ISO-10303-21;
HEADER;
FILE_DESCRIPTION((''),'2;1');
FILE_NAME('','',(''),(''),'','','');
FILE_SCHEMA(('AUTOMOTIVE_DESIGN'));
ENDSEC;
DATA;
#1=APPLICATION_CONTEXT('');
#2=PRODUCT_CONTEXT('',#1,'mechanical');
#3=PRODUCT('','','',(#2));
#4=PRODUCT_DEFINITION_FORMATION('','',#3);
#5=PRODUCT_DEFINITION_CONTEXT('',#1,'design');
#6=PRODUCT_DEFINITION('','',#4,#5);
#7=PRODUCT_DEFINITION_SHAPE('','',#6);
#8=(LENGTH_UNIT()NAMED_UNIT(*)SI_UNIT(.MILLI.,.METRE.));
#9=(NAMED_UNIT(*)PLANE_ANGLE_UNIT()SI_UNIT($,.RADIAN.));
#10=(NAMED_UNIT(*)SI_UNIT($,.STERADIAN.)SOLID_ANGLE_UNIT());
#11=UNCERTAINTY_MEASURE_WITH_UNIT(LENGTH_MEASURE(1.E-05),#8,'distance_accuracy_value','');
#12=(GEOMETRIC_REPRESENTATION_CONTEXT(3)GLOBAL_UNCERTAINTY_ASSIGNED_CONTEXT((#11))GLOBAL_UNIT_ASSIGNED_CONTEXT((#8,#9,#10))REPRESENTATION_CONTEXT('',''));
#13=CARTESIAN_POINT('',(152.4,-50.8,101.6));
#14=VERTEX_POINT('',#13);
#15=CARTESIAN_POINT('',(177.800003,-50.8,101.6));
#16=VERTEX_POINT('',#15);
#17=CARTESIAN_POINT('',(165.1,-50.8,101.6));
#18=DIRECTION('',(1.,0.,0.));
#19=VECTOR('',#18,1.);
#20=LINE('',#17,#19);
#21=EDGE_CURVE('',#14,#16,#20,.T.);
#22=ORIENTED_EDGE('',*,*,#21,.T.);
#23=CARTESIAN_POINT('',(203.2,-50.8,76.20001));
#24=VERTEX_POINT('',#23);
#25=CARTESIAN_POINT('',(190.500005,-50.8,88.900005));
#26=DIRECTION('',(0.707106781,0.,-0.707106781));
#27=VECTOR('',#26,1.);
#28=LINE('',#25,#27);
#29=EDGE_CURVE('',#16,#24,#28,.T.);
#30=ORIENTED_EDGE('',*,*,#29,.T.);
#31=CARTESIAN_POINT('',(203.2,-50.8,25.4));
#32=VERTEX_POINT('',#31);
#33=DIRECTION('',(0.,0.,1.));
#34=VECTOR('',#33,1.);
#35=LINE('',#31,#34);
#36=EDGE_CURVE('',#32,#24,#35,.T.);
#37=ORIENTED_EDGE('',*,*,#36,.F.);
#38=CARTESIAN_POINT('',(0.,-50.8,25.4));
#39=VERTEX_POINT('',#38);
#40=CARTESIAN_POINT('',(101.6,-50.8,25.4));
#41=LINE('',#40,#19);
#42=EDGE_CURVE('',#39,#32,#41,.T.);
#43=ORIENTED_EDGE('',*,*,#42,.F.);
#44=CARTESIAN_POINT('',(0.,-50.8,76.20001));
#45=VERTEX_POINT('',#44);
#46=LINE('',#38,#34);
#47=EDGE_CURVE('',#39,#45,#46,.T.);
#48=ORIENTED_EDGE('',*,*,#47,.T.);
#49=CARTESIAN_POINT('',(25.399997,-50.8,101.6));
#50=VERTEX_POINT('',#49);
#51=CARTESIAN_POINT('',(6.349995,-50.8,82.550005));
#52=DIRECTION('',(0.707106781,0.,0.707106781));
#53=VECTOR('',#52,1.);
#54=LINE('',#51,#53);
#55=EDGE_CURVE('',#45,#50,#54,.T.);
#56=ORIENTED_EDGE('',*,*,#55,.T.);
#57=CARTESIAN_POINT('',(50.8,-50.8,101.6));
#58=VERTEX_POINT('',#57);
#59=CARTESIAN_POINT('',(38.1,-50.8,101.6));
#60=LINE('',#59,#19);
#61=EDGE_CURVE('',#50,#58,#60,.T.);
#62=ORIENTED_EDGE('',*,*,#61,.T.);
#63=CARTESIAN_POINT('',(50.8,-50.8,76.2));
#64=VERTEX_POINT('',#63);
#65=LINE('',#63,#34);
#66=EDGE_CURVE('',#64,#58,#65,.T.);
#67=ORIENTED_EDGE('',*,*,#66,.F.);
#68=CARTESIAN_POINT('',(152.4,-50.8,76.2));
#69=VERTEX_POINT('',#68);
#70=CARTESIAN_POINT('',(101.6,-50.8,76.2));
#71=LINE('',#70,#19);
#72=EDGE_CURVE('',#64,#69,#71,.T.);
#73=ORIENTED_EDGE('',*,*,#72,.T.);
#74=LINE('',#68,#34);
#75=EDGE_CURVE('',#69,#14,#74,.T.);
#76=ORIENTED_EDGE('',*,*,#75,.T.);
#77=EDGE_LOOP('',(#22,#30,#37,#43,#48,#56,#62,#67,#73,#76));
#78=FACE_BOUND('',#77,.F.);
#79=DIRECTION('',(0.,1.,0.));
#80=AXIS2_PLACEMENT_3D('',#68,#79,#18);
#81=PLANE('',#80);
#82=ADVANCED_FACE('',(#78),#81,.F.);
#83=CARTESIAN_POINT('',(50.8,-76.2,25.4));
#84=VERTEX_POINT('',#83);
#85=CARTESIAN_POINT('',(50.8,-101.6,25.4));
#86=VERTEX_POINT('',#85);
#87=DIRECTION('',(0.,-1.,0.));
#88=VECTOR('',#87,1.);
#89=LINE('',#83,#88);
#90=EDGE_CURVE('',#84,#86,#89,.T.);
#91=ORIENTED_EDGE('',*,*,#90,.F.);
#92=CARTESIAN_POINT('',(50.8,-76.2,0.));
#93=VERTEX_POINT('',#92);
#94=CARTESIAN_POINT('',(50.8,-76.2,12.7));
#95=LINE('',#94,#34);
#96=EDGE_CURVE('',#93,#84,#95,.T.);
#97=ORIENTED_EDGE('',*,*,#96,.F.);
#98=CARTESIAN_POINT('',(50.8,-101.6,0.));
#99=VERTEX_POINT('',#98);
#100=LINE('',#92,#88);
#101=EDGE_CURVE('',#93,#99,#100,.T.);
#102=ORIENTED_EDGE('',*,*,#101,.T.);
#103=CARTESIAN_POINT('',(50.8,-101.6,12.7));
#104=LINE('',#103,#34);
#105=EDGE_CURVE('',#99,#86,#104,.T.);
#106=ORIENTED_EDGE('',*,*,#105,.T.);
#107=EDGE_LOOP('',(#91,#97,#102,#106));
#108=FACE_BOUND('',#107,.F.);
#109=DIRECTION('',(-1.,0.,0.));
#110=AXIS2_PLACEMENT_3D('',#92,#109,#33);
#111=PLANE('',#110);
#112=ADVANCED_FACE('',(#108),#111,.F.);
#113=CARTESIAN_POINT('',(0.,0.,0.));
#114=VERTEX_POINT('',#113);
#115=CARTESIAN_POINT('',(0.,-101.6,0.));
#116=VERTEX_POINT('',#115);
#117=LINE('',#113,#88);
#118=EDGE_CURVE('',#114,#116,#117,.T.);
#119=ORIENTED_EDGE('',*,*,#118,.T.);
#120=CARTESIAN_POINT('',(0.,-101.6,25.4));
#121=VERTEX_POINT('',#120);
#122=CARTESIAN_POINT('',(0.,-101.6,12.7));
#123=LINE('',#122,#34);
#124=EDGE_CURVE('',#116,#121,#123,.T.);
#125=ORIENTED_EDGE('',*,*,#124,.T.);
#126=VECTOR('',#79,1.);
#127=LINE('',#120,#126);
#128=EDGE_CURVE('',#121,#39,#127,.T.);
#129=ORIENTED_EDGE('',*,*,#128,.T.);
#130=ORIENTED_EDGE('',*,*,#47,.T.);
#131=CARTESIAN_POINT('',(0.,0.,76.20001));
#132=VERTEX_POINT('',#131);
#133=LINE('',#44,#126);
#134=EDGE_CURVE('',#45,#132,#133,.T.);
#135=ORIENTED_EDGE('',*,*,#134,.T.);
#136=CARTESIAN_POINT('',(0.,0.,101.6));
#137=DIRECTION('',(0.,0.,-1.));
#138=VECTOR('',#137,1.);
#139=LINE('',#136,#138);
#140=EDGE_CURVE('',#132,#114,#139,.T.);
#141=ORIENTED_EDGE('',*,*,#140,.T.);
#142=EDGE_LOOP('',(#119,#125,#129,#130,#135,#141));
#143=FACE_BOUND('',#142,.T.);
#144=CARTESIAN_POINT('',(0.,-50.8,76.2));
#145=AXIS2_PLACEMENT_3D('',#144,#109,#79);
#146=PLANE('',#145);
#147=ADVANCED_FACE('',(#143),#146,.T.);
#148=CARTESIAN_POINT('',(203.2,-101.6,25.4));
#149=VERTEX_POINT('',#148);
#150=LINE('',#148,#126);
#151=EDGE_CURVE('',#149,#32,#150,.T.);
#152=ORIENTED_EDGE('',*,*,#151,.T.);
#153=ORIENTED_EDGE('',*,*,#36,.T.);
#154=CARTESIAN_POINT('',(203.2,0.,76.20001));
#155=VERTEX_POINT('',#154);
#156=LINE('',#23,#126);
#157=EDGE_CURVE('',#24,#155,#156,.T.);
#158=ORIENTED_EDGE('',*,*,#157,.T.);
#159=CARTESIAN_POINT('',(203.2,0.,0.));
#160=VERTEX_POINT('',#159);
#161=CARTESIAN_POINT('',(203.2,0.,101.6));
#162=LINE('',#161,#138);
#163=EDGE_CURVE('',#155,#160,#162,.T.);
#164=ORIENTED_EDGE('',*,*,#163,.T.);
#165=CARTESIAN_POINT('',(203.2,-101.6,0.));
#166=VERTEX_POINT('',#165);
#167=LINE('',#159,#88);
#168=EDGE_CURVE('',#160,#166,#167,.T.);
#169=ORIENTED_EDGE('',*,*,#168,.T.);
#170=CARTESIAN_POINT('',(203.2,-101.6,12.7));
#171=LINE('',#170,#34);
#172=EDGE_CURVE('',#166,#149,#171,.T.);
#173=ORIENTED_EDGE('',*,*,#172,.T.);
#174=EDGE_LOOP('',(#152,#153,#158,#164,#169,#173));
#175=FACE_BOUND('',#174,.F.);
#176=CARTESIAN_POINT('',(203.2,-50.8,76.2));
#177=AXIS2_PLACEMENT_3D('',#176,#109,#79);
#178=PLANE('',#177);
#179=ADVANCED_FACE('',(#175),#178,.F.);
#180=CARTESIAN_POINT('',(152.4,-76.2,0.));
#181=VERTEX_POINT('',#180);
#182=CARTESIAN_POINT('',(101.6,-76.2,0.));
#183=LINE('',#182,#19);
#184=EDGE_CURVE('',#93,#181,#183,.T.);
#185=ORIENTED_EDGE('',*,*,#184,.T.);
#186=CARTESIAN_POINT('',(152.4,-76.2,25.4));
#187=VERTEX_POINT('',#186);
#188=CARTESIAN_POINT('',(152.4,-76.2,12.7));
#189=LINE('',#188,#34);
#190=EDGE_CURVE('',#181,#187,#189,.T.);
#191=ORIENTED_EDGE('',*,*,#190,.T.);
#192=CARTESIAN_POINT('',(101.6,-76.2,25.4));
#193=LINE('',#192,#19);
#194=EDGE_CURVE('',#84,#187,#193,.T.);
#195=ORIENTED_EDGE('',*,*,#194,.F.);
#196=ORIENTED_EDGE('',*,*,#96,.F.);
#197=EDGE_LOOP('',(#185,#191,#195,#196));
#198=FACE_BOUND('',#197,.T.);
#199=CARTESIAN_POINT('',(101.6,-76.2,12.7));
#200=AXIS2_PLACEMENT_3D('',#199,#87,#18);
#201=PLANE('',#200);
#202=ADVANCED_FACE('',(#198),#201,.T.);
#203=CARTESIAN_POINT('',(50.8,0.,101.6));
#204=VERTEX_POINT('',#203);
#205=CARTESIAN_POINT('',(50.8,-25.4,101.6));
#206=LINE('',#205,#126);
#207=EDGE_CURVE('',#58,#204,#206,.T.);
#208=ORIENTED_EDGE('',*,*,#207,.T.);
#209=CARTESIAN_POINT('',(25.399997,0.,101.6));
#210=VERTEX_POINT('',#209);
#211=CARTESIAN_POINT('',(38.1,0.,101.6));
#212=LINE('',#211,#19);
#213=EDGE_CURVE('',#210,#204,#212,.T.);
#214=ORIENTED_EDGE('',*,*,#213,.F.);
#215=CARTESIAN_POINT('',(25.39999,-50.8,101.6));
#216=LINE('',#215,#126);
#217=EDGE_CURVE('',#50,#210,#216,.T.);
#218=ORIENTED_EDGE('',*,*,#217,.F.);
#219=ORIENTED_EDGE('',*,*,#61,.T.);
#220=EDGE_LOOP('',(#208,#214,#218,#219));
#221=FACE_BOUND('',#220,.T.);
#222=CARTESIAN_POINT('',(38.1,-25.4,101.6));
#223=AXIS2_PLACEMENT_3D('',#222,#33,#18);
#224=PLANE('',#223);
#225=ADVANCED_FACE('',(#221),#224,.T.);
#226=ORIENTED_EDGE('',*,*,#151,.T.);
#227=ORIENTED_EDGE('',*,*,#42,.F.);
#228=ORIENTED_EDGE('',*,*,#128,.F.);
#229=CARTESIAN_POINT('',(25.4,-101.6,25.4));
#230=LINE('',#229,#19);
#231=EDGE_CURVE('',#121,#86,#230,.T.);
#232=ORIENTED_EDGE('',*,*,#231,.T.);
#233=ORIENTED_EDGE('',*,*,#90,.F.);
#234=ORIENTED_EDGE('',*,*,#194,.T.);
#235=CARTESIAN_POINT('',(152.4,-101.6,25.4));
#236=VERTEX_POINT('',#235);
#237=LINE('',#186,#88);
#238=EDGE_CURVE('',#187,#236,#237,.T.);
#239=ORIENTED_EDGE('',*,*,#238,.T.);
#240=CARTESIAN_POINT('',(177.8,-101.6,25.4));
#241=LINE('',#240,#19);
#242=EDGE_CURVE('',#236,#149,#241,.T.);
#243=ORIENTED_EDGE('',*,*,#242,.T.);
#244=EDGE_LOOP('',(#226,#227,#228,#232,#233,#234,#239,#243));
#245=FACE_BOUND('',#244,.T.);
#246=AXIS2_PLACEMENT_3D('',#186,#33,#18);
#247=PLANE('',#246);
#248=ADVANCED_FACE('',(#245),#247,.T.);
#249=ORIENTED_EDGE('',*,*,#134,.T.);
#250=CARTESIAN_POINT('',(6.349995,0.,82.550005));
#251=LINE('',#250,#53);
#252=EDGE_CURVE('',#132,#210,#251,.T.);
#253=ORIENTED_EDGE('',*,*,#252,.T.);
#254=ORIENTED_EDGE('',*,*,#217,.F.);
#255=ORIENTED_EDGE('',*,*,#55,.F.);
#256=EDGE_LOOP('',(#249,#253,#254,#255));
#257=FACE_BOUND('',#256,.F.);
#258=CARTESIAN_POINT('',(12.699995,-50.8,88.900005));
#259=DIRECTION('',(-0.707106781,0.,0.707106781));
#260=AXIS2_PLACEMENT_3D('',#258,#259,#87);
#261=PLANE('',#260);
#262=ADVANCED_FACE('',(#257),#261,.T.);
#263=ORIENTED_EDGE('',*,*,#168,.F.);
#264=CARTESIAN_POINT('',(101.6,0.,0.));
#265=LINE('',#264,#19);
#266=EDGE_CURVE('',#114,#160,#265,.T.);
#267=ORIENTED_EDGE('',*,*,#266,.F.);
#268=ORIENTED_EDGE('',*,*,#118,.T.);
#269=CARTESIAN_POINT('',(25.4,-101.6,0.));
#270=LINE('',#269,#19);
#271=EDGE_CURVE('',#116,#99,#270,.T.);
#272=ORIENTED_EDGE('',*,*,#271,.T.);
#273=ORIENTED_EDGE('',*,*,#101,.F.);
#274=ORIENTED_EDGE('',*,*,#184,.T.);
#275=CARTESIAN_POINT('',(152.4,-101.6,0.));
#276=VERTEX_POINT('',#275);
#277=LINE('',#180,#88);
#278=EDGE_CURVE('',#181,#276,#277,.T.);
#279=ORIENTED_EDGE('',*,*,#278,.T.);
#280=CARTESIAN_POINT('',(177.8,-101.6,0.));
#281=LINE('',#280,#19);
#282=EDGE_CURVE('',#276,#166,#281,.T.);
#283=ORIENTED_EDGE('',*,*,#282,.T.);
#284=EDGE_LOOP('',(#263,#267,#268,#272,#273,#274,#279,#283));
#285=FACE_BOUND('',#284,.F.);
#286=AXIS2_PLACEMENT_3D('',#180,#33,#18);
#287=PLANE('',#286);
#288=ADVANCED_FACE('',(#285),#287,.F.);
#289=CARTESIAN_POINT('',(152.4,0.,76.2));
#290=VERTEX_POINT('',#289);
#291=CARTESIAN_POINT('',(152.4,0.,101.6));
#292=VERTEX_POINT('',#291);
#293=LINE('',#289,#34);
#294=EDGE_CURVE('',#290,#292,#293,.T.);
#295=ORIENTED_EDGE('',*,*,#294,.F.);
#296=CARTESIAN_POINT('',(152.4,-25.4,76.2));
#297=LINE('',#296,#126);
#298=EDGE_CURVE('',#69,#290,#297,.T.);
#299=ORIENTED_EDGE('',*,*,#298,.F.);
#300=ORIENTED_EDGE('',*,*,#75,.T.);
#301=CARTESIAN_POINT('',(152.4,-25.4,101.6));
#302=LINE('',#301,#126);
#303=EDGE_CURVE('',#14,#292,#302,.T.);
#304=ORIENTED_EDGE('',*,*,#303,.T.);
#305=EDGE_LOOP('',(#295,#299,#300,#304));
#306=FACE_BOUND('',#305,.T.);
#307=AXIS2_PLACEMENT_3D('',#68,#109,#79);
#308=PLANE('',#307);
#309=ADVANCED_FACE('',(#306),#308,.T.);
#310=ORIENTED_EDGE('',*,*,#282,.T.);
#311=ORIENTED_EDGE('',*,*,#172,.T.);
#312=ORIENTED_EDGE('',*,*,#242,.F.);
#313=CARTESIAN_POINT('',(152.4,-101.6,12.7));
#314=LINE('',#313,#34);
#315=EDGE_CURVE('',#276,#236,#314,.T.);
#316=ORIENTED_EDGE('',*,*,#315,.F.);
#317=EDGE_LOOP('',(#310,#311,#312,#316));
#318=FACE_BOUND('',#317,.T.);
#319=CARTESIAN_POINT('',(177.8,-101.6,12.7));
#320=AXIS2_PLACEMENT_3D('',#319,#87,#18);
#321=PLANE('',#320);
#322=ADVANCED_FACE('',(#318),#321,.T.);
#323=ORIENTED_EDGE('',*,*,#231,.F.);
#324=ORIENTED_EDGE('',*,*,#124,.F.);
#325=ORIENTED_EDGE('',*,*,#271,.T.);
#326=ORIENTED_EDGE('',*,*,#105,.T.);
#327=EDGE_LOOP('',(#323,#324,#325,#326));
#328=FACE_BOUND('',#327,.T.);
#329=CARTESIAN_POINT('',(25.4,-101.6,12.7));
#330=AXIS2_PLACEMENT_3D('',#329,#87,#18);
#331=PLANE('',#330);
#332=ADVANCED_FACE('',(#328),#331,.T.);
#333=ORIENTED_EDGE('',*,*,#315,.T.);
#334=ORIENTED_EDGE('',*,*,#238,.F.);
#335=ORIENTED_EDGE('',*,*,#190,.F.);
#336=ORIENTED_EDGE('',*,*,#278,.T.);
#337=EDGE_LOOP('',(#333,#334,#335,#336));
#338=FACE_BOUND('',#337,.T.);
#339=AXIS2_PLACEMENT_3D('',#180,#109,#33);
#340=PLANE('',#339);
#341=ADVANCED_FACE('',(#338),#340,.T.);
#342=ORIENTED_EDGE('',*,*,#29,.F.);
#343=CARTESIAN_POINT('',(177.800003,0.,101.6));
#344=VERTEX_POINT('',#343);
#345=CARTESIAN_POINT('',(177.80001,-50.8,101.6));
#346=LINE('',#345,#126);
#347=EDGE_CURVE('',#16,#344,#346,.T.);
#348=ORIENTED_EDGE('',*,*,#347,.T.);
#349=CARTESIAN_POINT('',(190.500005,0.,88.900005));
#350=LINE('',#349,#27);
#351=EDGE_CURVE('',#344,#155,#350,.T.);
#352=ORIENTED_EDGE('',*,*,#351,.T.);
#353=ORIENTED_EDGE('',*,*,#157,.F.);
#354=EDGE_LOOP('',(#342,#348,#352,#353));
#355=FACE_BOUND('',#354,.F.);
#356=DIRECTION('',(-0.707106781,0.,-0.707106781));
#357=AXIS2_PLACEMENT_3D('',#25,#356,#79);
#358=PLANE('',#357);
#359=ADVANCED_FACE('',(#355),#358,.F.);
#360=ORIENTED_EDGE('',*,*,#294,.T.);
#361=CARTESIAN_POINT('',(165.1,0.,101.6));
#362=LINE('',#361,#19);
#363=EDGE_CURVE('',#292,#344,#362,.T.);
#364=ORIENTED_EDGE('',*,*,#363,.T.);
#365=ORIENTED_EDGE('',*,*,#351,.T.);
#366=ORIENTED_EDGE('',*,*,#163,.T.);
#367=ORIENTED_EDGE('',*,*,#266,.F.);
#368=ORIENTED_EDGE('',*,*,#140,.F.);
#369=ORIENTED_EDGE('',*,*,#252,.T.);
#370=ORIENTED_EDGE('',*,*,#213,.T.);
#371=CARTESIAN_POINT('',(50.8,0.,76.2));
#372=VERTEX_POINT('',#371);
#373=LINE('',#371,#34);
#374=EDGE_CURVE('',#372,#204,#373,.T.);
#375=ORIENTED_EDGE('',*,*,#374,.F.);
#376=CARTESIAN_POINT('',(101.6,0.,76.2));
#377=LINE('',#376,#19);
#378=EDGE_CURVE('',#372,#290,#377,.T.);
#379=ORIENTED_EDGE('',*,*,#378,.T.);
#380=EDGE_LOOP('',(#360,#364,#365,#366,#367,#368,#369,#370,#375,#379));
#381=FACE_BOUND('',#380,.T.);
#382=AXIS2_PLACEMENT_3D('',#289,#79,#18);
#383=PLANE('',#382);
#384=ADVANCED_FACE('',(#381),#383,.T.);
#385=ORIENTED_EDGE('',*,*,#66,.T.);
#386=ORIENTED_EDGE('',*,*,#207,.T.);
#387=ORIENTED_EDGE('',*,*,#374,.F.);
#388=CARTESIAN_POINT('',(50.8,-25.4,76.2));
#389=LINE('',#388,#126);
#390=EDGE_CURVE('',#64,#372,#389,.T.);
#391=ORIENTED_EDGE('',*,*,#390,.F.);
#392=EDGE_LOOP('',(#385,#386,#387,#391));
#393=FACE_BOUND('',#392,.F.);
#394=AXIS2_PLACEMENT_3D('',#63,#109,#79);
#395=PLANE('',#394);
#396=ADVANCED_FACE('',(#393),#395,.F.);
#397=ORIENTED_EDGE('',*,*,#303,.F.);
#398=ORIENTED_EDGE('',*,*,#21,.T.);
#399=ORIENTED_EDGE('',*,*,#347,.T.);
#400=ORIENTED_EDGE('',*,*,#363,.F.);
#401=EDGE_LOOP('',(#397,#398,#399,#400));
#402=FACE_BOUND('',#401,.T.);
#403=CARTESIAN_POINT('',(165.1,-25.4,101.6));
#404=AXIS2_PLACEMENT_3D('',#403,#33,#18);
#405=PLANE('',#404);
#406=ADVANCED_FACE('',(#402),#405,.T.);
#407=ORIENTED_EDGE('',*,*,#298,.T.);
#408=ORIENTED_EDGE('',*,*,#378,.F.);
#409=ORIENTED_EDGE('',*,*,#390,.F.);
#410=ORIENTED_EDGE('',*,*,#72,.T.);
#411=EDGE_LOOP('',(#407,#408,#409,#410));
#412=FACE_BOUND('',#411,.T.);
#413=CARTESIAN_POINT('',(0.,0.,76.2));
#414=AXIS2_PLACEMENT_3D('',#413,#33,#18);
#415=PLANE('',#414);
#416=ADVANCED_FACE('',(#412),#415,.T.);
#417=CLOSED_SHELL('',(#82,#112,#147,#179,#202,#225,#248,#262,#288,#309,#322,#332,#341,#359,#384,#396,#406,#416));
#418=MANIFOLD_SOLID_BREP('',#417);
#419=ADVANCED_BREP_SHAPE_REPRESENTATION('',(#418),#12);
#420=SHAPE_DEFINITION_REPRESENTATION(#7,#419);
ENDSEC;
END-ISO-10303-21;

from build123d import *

# Parameters (mm, degrees)
F0_W      = 203.2
F0_H      = 76.2
F1_DEPTH  = 50.8
F2_W      = 203.2
F2_H      = 25.4
F3_DEPTH  = 25.4
F4_W      = 50.8
F4_H      = 25.4
F5_DEPTH  = 25.4
F6_W      = 50.8
F6_H      = 25.4
F7_DEPTH  = 25.4
F8_W      = 25.4
F8_H      = 50.8
F9_DEPTH  = 25.4
F10_SIZE  = 25.39999
F11_W     = 25.4
F11_H     = 50.8
F12_DEPTH = 25.4
F13_W     = 25.4
F13_H     = 50.8
F14_DEPTH = 25.4
F15_SIZE  = 25.39999
F16_W     = 25.4
F16_H     = 50.8
F17_DEPTH = 25.4


# Not quite as in the source:
# - a fillet or chamfer is up to 0.001 mm smaller than in the source, because OpenCascade refuses the exact size


with BuildPart() as f1:
    # F0 (on Front) → F1 (new body)
    with BuildSketch(Plane.XZ):
        with Locations((101.6, 38.1)):
            Rectangle(F0_W, F0_H)
    extrude(amount=F1_DEPTH)

    # F2 (on face) → F3 (join)
    with BuildSketch(Plane.XZ.offset(50.8)):
        with Locations((101.6, 12.7)):
            Rectangle(F2_W, F2_H)
    extrude(amount=F3_DEPTH)

    # F4 (on face) → F5 (join)
    with BuildSketch(Plane.XZ.offset(76.2)):
        with Locations((25.4, 12.7)):
            Rectangle(F4_W, F4_H)
    extrude(amount=F5_DEPTH)

    # F6 (on face) → F7 (join)
    with BuildSketch(Plane.XZ.offset(76.2)):
        with Locations((177.8, 12.7)):
            Rectangle(F6_W, F6_H)
    extrude(amount=F7_DEPTH)

    # F8 (on face) → F9 (join)
    with BuildSketch(Plane.XY.offset(76.2)):
        with Locations((12.7, -25.4)):
            Rectangle(F8_W, F8_H)
    extrude(amount=F9_DEPTH)

    # F10 (size 25.4 in the source; OpenCascade refuses exactly that, so slightly less here)
    f10_edges = [f1.edges().sort_by_distance(p)[0] for p in [
        (0, -25.4, 101.6),
    ]]
    chamfer(f10_edges, length=F10_SIZE)

    # F11 (on face) → F12 (join)
    with BuildSketch(Plane.XY.offset(76.2)):
        with Locations((38.1, -25.4)):
            Rectangle(F11_W, F11_H)
    extrude(amount=F12_DEPTH)

    # F13 (on face) → F14 (join)
    with BuildSketch(Plane.XY.offset(76.2)):
        with Locations((190.5, -25.4)):
            Rectangle(F13_W, F13_H)
    extrude(amount=F14_DEPTH)

    # F15 (size 25.4 in the source; OpenCascade refuses exactly that, so slightly less here)
    f15_edges = [f1.edges().sort_by_distance(p)[0] for p in [
        (203.2, -25.4, 101.6),
    ]]
    chamfer(f15_edges, length=F15_SIZE)

    # F16 (on face) → F17 (join)
    with BuildSketch(Plane.XY.offset(76.2)):
        with Locations((165.1, -25.4)):
            Rectangle(F16_W, F16_H)
    extrude(amount=F17_DEPTH)


solid = f1.part
